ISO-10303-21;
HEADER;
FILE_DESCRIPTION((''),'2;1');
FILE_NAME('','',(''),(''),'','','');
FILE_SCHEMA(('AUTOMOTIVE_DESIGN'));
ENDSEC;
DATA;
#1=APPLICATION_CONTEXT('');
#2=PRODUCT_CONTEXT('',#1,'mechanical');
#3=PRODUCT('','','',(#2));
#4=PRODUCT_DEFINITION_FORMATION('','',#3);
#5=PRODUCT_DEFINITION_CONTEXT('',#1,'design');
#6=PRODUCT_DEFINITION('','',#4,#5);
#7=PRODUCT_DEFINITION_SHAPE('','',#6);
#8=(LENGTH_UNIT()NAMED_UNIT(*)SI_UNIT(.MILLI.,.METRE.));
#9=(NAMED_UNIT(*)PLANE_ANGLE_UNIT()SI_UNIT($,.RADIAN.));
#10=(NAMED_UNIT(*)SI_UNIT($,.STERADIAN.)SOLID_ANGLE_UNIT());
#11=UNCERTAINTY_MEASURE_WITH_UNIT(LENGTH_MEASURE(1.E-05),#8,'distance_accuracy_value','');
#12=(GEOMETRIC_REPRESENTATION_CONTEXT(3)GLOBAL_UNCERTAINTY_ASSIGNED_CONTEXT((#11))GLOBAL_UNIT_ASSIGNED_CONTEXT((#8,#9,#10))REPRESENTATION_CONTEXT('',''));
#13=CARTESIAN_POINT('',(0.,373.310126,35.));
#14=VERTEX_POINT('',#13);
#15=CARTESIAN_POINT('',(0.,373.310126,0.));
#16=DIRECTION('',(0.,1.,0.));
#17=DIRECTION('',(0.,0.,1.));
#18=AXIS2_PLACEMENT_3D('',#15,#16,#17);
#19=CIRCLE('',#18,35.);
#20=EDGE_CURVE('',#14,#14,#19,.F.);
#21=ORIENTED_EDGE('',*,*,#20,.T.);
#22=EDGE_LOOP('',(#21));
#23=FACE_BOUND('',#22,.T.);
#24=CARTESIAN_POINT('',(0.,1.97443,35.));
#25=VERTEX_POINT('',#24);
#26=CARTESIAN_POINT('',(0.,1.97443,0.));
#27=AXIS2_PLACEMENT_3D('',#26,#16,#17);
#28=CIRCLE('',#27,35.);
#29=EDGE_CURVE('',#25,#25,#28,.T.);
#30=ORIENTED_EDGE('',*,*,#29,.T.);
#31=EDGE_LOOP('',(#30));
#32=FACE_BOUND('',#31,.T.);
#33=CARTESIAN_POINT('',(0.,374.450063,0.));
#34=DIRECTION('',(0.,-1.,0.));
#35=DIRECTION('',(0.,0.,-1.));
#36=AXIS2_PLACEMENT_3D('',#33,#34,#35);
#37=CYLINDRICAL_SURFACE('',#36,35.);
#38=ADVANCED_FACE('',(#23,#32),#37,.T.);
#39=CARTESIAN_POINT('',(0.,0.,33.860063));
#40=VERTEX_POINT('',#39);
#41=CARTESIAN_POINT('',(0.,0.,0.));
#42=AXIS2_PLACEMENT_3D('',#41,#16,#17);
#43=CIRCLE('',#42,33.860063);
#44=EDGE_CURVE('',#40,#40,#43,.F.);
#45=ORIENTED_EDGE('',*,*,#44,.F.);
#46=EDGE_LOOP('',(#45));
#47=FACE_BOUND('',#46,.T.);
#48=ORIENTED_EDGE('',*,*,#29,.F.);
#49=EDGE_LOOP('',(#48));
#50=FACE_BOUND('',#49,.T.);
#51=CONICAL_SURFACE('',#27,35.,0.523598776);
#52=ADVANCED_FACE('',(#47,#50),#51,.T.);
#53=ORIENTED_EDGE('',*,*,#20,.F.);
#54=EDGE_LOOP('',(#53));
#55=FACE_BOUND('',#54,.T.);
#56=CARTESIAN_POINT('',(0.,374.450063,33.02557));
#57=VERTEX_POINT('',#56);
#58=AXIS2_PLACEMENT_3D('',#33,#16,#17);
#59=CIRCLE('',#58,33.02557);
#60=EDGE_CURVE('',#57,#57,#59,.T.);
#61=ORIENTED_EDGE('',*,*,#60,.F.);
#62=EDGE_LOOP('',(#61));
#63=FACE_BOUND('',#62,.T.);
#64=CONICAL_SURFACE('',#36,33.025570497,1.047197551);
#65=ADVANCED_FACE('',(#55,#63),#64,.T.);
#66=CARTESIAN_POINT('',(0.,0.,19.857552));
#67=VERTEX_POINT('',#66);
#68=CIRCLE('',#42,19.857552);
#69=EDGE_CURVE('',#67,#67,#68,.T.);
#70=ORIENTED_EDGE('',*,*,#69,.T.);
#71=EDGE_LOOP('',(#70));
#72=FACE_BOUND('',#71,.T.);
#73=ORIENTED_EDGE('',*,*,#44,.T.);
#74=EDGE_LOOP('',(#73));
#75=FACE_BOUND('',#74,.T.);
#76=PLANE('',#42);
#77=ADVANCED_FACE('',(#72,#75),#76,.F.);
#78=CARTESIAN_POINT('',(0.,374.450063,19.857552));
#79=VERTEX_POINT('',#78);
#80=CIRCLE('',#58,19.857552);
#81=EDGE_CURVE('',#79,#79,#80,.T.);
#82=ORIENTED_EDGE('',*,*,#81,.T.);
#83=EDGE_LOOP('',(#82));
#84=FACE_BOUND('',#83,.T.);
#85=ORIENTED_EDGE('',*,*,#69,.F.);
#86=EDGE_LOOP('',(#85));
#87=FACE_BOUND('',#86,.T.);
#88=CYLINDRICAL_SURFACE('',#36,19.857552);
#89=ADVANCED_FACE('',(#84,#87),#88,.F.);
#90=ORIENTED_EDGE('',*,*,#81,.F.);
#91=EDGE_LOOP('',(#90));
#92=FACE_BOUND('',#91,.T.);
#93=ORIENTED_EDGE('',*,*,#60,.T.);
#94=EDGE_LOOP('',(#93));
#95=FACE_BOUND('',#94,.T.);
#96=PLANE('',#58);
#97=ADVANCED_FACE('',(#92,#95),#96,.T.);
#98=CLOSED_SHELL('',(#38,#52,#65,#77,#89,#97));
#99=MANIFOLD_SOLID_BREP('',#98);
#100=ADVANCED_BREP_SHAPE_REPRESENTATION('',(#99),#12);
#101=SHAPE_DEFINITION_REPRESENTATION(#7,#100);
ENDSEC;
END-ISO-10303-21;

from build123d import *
from OCP.BRepFilletAPI import BRepFilletAPI_MakeChamfer

# Parameters (mm, degrees)
SKETCH1_R           = 35
BOSS_EXTRUDE1_DEPTH = 374.450062969
SKETCH2_R           = 19.857552491
CUT_EXTRUDE1_DEPTH  = 378.707359813
CHAMFER1_SIZE       = 1.139937405
CHAMFER1_SIZE2      = 1.974429503


with BuildPart() as part:
    # Sketch1 → Boss-Extrude1 (new body)
    with BuildSketch(Plane(origin=(0, 0, 0), x_dir=(1, 0, 0), z_dir=(0, 1, 0))):
        Circle(SKETCH1_R)
    extrude(amount=BOSS_EXTRUDE1_DEPTH)

    # Sketch2 → Cut-Extrude1 (cut, through all)
    with BuildSketch(Plane(origin=(0, 0, 0), x_dir=(1, 0, 0), z_dir=(0, 1, 0))):
        Circle(SKETCH2_R)
    extrude(amount=CUT_EXTRUDE1_DEPTH, mode=Mode.SUBTRACT)

    # Chamfer1: one chamfer whose edges measure the first distance from different faces: ONE call of the kernel's chamfer builder (chamfer() names one face for all edges)
    chamfer1_edges_1 = [part.edges().sort_by_distance(p)[0] for p in [
        (-35, 374.450062969, 0),
    ]]
    chamfer1_side_1 = [part.faces().sort_by_distance(p)[0] for p in [
        (-35, 187.225031484, 0),
    ]]
    chamfer1_edges_2 = [part.edges().sort_by_distance(p)[0] for p in [
        (-35, 0, 0),
    ]]
    chamfer1_side_2 = [part.faces().sort_by_distance(p)[0] for p in [
        (-34.010050506, 0, 0),
    ]]
    chamfer1 = BRepFilletAPI_MakeChamfer(part.part.solid().wrapped)
    for e in chamfer1_edges_1:
        chamfer1.Add(CHAMFER1_SIZE, CHAMFER1_SIZE2, e.wrapped, chamfer1_side_1[0].wrapped)  # the first distance lies on this face
    for e in chamfer1_edges_2:
        chamfer1.Add(CHAMFER1_SIZE, CHAMFER1_SIZE2, e.wrapped, chamfer1_side_2[0].wrapped)  # the first distance lies on this face
    add(Compound.cast(chamfer1.Shape()), mode=Mode.REPLACE)


solid = part.part
